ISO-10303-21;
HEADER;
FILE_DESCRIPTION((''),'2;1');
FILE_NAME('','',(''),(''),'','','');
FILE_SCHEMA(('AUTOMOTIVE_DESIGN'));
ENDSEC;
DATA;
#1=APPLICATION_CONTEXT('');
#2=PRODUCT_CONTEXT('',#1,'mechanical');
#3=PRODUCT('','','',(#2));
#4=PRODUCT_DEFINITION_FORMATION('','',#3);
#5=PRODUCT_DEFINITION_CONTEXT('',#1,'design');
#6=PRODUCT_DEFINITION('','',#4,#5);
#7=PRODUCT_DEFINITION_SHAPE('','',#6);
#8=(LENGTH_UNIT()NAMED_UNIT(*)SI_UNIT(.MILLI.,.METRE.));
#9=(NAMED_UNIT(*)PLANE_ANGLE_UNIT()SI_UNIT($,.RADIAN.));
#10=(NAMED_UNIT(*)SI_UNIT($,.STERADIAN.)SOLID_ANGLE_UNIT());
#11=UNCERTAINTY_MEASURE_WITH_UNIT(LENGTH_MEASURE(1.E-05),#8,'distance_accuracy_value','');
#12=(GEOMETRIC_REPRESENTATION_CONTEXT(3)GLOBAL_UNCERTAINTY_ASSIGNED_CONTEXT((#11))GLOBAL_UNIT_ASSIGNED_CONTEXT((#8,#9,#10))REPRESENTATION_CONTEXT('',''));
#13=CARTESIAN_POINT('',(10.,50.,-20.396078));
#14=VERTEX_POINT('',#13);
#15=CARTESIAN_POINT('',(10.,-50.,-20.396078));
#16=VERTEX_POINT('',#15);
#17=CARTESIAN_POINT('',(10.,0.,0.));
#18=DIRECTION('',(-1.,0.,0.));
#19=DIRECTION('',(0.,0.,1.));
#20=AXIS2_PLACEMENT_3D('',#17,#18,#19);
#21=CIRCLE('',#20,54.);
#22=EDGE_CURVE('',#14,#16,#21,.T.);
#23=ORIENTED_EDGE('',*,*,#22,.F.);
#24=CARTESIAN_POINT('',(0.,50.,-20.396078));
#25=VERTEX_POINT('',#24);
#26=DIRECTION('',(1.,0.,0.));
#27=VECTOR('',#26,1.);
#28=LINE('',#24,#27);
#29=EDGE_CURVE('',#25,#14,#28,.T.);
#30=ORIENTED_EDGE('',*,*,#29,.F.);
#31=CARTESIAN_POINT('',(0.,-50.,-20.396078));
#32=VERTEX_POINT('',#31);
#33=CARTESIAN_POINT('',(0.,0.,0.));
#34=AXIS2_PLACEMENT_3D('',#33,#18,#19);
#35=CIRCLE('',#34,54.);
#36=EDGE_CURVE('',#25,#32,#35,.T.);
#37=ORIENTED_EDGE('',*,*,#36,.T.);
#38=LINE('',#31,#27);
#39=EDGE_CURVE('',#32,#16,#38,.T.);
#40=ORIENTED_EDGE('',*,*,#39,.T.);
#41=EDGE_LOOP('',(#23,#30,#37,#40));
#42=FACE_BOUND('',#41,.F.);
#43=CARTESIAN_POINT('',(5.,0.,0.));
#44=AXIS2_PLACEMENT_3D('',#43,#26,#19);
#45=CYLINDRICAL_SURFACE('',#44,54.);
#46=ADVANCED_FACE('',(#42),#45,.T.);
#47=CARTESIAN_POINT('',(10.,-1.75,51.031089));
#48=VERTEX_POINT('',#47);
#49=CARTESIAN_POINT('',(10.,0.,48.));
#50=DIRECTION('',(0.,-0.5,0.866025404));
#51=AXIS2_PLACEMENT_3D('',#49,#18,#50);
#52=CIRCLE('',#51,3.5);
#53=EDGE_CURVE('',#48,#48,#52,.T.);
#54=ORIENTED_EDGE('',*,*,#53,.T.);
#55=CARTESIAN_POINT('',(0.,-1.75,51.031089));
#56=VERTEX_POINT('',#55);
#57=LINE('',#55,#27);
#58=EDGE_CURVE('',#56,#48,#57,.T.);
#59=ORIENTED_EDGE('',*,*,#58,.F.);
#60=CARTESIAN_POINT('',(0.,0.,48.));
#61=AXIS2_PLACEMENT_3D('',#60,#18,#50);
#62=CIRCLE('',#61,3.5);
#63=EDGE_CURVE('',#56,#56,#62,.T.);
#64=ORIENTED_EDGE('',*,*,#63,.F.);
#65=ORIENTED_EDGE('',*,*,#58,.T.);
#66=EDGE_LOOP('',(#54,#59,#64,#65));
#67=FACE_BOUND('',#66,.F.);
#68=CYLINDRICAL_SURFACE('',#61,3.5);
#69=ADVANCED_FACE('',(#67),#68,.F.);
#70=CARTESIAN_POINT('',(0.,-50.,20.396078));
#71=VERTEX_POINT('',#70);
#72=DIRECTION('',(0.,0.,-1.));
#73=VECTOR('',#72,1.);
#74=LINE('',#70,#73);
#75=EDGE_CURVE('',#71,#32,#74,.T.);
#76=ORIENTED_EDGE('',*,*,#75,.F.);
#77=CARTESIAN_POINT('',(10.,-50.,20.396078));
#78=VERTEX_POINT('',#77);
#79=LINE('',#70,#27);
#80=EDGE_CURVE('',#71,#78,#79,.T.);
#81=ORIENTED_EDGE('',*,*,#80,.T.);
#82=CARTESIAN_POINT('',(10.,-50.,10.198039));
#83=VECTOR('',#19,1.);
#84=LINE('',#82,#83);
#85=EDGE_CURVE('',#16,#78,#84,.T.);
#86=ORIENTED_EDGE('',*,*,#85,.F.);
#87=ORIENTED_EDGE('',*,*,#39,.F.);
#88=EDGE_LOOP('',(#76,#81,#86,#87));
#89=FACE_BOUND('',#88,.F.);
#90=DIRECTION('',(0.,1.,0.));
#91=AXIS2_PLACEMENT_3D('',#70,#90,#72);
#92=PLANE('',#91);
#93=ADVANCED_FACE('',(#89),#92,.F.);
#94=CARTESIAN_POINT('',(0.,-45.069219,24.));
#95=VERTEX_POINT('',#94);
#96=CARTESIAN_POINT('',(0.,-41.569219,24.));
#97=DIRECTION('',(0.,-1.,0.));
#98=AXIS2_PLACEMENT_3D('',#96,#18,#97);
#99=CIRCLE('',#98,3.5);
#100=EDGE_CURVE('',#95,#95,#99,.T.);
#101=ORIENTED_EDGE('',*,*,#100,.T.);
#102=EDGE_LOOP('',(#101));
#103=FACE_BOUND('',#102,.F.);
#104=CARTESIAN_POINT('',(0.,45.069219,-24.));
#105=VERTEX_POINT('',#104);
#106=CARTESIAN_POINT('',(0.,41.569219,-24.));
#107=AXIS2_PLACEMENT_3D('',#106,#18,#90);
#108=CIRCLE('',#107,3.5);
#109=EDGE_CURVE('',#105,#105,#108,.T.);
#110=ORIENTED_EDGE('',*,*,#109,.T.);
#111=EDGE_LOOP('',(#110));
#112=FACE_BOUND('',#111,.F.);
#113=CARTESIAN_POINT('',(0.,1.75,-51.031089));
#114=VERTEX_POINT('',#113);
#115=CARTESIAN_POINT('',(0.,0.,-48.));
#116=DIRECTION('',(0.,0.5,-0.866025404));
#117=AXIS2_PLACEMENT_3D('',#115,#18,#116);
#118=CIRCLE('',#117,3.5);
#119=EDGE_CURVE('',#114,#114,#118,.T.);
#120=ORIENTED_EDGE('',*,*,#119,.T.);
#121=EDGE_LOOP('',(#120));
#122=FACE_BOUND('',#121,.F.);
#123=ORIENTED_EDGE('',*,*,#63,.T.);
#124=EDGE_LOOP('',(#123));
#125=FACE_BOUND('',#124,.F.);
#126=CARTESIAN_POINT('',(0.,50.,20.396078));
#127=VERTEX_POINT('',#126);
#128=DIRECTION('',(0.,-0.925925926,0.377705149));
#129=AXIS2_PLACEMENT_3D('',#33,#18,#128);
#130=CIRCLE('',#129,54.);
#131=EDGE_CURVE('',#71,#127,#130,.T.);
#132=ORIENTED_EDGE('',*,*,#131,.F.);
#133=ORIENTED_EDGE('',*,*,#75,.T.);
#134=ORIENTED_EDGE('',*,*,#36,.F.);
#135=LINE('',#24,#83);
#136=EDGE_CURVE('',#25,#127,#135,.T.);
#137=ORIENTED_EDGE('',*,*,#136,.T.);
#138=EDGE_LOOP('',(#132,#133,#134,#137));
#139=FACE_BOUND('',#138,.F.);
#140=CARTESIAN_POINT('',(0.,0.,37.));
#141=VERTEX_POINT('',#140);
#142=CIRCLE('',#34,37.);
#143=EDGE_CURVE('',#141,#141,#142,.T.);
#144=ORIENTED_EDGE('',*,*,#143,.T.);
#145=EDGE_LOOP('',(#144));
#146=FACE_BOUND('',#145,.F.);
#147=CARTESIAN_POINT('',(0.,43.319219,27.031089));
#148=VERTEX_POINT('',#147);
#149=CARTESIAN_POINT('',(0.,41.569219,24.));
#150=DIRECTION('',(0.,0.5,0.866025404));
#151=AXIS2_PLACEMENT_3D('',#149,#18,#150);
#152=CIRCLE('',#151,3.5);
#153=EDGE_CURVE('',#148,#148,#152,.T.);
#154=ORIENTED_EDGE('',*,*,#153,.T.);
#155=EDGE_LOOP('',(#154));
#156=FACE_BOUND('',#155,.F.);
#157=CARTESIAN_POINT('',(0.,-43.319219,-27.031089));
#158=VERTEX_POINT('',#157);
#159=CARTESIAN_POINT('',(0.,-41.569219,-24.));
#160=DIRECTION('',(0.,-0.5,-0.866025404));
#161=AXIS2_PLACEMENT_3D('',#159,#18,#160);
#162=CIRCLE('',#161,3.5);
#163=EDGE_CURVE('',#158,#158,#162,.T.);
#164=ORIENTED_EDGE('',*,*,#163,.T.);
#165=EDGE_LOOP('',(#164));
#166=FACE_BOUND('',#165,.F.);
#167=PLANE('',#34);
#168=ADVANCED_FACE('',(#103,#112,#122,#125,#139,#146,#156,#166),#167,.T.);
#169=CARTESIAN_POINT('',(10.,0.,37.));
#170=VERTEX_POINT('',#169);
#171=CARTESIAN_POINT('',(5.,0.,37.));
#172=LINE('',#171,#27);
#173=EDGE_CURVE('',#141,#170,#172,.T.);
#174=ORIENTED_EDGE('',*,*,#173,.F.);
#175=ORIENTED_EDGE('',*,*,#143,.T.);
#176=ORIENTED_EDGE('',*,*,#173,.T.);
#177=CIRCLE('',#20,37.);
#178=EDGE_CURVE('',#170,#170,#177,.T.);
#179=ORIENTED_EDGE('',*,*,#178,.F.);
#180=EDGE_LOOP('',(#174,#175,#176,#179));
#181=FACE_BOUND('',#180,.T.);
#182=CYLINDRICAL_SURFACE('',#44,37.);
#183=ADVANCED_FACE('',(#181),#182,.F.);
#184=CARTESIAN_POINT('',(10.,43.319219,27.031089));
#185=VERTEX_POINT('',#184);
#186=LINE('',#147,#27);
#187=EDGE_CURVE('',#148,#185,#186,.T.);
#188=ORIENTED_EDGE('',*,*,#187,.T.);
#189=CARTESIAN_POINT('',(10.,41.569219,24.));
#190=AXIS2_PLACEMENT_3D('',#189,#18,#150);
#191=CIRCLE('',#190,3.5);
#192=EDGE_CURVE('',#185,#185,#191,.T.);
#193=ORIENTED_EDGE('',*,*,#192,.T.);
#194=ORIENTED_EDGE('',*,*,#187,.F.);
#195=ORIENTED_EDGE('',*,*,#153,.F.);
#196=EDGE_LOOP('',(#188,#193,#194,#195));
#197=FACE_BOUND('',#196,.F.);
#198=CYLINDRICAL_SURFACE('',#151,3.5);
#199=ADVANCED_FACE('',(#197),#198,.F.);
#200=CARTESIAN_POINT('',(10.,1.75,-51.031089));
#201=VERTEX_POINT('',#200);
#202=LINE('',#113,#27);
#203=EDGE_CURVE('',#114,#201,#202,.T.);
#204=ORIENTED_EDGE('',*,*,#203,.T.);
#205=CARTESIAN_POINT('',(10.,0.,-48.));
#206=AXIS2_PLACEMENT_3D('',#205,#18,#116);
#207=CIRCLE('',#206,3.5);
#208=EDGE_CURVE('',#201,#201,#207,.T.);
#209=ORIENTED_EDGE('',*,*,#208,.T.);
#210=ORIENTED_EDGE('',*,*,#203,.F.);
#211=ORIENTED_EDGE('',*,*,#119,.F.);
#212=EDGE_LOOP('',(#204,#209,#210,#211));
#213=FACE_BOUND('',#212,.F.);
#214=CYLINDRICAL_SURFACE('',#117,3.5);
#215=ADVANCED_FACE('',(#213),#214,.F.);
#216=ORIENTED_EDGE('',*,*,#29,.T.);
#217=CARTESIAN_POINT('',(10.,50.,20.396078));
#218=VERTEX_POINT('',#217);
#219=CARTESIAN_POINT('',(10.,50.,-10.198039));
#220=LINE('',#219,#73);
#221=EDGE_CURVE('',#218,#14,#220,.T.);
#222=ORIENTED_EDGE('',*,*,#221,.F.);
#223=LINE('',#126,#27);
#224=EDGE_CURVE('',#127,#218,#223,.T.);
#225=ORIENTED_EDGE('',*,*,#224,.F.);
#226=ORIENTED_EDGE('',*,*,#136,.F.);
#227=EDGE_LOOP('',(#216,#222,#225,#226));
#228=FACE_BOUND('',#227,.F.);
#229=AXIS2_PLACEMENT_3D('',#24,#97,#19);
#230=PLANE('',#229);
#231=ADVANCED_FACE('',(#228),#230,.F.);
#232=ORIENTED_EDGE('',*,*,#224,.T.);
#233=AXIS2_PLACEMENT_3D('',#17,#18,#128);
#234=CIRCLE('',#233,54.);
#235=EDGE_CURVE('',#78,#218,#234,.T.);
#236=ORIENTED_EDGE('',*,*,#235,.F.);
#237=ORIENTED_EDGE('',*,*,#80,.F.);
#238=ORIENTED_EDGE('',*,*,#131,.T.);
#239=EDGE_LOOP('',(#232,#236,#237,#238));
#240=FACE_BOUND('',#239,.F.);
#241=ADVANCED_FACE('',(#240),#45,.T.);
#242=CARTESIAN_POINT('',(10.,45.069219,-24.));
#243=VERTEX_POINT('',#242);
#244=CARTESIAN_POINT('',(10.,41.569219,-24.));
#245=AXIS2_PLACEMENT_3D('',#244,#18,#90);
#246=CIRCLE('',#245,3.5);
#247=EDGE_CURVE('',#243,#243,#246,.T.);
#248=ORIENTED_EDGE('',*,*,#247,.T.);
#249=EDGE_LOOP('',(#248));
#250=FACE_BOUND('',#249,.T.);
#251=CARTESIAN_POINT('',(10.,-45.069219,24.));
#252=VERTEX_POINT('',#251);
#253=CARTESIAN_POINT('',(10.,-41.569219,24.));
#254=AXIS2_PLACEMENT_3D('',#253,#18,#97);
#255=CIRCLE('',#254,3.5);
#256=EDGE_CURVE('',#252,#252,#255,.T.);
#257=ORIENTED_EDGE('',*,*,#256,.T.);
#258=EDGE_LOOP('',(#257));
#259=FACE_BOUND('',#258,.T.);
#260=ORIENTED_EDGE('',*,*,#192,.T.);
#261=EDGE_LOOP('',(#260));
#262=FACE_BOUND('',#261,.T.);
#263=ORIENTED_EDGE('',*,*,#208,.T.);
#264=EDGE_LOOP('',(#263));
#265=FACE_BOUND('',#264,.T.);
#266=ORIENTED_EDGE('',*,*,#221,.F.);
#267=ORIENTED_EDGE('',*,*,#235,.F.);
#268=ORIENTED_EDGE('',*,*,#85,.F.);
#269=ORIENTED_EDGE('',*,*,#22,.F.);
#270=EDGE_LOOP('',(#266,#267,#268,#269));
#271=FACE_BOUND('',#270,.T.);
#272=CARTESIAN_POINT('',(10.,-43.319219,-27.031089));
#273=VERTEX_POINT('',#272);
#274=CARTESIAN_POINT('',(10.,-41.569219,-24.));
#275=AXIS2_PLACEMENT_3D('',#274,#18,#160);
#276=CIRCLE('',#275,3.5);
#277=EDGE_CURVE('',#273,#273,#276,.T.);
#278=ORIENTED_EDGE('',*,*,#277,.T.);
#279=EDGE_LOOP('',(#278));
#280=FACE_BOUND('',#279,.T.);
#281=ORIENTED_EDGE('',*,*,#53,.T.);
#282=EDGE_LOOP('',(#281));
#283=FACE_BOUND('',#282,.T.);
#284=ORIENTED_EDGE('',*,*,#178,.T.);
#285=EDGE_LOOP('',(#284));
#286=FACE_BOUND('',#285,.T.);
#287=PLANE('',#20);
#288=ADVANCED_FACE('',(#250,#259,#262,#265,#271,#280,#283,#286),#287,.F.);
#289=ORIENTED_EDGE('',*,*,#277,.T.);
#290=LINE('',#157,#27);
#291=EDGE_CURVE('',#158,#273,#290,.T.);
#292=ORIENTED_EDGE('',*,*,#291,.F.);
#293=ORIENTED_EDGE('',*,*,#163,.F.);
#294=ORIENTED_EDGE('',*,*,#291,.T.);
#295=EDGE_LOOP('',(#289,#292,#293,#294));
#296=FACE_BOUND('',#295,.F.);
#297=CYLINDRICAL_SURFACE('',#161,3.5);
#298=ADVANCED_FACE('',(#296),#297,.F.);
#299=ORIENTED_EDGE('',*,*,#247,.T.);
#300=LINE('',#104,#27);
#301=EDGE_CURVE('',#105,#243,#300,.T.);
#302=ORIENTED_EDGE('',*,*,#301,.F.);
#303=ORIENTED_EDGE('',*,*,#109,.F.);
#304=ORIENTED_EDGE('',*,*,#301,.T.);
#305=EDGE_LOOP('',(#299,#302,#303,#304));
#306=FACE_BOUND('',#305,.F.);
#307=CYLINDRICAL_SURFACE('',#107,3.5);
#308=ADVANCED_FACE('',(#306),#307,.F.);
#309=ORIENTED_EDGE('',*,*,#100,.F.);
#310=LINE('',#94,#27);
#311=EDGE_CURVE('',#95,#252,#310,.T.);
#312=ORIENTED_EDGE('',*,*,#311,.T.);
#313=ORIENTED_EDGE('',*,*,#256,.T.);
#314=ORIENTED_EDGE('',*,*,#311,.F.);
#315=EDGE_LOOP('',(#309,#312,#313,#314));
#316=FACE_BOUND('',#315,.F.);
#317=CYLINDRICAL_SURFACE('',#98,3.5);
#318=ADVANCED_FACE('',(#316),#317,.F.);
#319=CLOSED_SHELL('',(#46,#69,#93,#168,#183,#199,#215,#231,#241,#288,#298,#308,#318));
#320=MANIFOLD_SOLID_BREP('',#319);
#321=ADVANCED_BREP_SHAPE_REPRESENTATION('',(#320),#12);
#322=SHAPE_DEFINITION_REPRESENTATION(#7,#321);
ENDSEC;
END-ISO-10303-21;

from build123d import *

# Parameters (mm, degrees)
F0_W            = 10
F0_H            = 17
F2_R            = 3.5
F3_DEPTH        = 10.001
F3_COPIES_COUNT = 6
F5_DEPTH        = 10.001


# Not quite as in the source:
# - a pattern or mirror of a feature is missing from the dataset's text; its kind, count and spacing are read off the source's solid


with BuildPart() as f1:
    # F0 (on Front) → F1 (revolve)
    with BuildSketch(Plane.XZ):
        with Locations((5, 45.5)):
            Rectangle(F0_W, F0_H)
    revolve(axis=Axis((-28.7704151153, 0, 0), (-1, 0, 0)))

    # F2 (on face) → F3 (cut, through all)
    with BuildSketch(Plane(origin=(0, 0, 0), x_dir=(0, -1, 0), z_dir=(-1, 0, 0))):
        with Locations((41.5692193817, 24)):
            Circle(F2_R)
    f3 = extrude(amount=-F3_DEPTH, mode=Mode.SUBTRACT)

    # F3_copies: F3 ×6 about axis
    f3_copies_axis = Axis((0, 0, 0), (1, 0, 0))
    for i in range(1, F3_COPIES_COUNT):
        add(f3.rotate(f3_copies_axis, i * 360 / F3_COPIES_COUNT), mode=Mode.SUBTRACT)

    # F4 (on face) → F5 (cut, through all)
    with BuildSketch(Plane(origin=(0, 0, 0), x_dir=(0, -1, 0), z_dir=(-1, 0, 0))):
        with BuildLine():
            Line((-50, -20.3960780544), (-50, 20.3960780544))
            ThreePointArc((-50, 20.3960780544), (-54, 0), (-50, -20.3960780544))
        make_face()
        with BuildLine():
            ThreePointArc((54, 0), (52.990565198, 10.3923048454), (50, 20.3960780544))
            Line((50, 20.3960780544), (50, -20.3960780544))
            ThreePointArc((50, -20.3960780544), (52.990565198, -10.3923048454), (54, 0))
        make_face()
    extrude(amount=-F5_DEPTH, mode=Mode.SUBTRACT)


solid = f1.part
